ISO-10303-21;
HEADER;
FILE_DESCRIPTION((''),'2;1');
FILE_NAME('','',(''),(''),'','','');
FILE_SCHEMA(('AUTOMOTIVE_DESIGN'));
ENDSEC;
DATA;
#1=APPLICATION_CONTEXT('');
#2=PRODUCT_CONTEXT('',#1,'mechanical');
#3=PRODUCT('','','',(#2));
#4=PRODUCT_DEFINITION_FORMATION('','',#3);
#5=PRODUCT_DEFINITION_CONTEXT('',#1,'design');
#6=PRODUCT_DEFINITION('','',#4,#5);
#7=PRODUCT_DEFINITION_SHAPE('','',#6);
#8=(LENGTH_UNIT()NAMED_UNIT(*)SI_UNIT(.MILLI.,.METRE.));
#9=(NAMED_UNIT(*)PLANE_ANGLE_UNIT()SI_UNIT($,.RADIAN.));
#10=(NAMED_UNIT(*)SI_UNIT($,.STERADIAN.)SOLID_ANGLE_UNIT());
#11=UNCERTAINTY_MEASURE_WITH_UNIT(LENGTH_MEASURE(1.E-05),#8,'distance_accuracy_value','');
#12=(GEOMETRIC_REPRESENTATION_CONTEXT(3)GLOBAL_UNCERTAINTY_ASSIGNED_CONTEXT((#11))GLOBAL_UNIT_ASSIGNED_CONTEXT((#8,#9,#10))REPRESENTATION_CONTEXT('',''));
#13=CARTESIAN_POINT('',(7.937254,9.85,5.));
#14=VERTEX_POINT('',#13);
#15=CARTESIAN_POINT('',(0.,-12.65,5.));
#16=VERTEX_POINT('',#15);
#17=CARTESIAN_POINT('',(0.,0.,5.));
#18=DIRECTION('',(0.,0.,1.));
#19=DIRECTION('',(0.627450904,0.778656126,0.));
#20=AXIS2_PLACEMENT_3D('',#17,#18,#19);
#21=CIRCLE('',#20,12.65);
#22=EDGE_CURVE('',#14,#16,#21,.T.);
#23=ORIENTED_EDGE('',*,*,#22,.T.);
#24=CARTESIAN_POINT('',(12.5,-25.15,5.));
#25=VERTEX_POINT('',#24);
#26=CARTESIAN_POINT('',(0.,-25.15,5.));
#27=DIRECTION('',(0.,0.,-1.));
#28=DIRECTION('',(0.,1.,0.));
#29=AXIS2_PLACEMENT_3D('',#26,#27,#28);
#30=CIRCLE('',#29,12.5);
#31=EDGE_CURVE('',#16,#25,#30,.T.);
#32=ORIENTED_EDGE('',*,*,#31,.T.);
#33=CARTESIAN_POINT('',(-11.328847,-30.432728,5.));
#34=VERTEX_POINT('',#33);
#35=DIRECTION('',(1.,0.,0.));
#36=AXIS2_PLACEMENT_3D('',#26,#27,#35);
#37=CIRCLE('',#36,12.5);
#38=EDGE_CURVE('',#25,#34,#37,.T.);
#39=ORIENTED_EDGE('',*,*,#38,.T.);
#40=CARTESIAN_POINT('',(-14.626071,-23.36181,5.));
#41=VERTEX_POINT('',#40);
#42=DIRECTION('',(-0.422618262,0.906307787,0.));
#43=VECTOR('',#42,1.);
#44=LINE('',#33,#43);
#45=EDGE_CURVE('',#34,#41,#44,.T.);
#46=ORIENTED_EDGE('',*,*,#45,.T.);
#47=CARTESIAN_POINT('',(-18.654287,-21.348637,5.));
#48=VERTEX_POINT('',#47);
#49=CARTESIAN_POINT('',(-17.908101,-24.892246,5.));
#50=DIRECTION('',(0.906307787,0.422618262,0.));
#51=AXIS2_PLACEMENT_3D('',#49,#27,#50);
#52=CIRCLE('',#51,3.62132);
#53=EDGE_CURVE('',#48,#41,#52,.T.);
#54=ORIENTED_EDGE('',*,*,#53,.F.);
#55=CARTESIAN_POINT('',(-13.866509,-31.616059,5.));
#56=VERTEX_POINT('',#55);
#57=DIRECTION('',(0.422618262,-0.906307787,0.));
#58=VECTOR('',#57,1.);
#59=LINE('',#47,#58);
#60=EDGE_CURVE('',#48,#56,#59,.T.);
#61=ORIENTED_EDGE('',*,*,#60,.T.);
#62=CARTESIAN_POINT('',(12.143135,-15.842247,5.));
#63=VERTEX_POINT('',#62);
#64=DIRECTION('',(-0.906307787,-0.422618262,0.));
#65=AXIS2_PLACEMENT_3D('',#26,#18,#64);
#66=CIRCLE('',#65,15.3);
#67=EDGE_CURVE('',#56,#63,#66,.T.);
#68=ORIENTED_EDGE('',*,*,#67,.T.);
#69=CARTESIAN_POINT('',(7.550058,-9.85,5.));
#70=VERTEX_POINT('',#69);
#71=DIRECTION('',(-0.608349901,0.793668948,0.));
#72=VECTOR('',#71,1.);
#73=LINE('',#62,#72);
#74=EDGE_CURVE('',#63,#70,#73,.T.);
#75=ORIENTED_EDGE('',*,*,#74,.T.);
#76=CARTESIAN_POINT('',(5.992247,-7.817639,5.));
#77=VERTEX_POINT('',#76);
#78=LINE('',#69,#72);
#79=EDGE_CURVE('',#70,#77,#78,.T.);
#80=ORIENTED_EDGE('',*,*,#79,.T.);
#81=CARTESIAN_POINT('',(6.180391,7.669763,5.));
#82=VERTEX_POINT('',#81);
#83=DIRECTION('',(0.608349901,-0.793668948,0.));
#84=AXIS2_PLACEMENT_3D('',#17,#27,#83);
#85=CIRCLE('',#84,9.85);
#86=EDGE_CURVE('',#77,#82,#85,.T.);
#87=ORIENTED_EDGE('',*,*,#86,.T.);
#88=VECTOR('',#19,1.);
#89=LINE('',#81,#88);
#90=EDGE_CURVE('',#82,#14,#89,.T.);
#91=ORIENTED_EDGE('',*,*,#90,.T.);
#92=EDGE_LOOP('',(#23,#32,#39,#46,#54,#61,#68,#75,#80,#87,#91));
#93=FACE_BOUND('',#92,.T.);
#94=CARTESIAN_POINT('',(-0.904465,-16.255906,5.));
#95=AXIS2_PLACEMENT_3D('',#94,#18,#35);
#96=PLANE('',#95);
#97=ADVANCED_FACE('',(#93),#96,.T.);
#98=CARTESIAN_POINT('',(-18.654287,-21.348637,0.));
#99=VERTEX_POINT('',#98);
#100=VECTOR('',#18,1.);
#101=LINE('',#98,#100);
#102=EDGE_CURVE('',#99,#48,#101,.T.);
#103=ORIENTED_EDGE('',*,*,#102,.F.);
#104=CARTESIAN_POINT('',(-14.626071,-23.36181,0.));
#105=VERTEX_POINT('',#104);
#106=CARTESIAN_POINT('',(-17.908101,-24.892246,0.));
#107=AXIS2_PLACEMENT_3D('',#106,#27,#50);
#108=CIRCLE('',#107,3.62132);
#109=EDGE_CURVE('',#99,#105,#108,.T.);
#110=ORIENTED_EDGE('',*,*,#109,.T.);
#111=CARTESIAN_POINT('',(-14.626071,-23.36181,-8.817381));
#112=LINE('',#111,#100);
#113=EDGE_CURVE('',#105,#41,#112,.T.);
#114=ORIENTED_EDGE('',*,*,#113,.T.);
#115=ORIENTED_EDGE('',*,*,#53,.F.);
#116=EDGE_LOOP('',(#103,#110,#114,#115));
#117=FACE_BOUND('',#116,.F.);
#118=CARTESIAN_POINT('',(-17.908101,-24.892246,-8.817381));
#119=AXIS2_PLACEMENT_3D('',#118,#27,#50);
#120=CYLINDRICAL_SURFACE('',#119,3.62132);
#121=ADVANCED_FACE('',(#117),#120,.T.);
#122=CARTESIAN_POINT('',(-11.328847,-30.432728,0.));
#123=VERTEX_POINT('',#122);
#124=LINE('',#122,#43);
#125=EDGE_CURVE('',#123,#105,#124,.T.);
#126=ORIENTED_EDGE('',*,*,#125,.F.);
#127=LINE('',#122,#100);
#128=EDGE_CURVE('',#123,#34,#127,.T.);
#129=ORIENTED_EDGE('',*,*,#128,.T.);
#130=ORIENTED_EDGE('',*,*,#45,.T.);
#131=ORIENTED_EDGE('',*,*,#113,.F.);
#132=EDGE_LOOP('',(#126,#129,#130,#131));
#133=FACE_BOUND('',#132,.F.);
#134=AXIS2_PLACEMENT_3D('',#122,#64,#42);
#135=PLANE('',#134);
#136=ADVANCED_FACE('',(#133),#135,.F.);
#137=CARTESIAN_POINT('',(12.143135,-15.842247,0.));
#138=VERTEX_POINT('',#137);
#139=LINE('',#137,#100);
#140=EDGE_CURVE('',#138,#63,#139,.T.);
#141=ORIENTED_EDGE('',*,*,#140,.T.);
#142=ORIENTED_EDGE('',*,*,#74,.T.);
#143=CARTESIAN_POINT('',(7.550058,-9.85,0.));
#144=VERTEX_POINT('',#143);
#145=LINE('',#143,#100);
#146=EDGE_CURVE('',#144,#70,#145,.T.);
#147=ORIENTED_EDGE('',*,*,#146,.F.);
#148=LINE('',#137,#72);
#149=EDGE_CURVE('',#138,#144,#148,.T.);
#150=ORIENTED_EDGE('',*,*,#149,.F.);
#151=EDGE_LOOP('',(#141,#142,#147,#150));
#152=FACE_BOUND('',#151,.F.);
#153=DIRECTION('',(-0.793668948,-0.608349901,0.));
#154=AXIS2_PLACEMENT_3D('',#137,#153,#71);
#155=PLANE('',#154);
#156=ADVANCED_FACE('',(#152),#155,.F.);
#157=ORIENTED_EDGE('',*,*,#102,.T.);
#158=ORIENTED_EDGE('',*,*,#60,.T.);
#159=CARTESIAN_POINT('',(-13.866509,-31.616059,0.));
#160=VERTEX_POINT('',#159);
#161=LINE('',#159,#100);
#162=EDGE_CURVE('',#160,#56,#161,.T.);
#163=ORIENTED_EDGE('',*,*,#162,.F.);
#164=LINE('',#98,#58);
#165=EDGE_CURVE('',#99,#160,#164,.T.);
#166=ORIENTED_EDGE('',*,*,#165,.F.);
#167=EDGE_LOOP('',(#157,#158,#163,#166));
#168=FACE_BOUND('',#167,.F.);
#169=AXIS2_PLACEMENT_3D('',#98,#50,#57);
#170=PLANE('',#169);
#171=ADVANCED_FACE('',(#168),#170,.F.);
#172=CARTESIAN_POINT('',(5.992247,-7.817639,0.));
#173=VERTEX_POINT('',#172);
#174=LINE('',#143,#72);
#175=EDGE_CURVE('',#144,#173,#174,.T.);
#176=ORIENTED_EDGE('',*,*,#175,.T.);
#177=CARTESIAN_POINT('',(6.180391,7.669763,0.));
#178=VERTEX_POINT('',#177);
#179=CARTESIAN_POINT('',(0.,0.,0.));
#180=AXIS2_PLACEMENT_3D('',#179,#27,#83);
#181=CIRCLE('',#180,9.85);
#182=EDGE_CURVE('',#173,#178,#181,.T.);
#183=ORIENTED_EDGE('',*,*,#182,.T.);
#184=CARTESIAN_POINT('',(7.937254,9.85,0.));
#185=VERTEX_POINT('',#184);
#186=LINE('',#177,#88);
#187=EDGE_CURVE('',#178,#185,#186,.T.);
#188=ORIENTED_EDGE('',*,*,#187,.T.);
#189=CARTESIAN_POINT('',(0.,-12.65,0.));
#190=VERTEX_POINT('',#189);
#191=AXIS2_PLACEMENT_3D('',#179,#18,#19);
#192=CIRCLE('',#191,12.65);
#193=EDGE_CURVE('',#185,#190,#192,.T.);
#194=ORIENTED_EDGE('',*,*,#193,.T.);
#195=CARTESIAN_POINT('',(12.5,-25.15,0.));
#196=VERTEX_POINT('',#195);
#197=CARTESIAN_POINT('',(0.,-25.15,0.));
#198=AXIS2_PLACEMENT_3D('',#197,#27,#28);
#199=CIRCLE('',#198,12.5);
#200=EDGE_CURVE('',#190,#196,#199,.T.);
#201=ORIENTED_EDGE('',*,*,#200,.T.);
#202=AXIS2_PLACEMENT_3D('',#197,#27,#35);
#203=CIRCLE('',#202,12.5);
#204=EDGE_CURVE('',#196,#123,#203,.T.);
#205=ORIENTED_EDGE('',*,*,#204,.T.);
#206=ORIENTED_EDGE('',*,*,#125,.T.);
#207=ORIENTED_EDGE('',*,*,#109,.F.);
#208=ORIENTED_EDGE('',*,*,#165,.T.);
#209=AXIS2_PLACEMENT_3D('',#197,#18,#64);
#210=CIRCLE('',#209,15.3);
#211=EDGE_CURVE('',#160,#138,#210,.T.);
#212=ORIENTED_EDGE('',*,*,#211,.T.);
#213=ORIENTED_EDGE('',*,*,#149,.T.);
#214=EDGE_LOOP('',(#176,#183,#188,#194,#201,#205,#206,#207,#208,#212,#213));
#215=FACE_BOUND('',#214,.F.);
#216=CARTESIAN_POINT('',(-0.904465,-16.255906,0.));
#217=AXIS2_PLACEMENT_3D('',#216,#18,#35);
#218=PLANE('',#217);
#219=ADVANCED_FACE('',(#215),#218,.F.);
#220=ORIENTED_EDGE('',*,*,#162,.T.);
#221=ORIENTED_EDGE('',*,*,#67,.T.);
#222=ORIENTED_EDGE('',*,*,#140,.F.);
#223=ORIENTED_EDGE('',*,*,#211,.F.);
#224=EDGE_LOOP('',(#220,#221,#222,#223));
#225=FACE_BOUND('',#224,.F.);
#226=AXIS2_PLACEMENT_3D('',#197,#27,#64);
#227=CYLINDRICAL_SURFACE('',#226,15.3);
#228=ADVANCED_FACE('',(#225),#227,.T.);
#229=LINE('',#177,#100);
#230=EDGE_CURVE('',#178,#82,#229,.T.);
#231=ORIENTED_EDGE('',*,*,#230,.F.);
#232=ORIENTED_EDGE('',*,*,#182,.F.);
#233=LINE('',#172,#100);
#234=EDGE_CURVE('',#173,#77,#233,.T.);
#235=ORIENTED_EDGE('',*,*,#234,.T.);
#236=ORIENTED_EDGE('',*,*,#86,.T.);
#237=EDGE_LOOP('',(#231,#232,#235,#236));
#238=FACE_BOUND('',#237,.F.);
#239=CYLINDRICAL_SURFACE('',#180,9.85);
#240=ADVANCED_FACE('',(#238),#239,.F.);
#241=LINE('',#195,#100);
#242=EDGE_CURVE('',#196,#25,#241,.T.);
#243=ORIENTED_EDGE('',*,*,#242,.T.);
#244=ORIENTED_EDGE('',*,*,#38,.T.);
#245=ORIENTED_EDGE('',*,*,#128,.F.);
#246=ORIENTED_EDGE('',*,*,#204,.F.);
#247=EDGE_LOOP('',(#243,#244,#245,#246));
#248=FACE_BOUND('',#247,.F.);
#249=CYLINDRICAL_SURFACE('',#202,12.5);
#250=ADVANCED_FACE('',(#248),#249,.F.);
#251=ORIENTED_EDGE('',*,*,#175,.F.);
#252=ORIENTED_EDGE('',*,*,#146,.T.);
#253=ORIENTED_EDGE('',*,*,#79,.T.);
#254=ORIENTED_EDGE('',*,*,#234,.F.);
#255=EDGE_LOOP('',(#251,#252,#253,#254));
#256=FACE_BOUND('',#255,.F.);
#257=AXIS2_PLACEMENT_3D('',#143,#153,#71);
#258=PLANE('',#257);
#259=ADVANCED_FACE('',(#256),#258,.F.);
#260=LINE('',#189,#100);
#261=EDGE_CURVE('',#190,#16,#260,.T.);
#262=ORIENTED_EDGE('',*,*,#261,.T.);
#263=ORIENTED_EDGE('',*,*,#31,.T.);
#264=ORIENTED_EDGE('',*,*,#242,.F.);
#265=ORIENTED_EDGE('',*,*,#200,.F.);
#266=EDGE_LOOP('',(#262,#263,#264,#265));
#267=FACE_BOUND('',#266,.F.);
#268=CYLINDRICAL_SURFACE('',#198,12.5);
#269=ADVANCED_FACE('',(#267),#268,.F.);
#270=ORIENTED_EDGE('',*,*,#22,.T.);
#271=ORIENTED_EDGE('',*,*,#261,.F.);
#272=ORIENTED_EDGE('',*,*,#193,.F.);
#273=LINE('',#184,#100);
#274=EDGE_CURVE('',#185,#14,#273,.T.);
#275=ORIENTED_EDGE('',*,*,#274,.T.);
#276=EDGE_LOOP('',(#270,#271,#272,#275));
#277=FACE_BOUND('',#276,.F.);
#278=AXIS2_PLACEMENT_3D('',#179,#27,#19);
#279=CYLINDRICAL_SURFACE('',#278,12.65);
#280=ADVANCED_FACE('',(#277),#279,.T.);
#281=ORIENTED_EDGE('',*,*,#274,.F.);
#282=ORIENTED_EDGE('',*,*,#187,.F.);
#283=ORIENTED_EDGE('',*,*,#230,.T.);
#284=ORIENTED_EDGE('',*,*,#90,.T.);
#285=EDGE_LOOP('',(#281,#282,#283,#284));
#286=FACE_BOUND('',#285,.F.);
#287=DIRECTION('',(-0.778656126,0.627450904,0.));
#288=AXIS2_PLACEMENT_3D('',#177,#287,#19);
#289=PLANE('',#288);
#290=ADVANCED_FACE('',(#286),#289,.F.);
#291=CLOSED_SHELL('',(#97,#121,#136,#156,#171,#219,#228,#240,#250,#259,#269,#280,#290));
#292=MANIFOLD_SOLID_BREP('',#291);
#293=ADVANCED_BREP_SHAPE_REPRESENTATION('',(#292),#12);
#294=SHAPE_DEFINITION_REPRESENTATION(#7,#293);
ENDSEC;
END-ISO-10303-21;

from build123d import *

# Parameters (mm, degrees)
F1_DEPTH    = 5
F2_T1_DEPTH = 22.6347624906


# Not quite as in the source:
# - a fillet or chamfer that OpenCascade refuses, or shapes differently, is made with other operations: its cross-section is extruded or revolved along the edge and cut away or added


with BuildPart() as f1:
    # F0 (on Top) → F1 (new body)
    with BuildSketch(Plane.XY):
        with BuildLine():
            ThreePointArc((5.9922465209, -7.8176391342), (-9.8492732487, 0.1196514659), (6.1803914025, 7.6697628458))
            Line((6.1803914025, 7.6697628458), (7.9372539332, 9.85))
            ThreePointArc((7.9372539332, 9.85), (-11.9294802904, 4.2083250825), (0, -12.65))
            ThreePointArc((0, -12.65), (8.8388347648, -16.3111652352), (12.5, -25.15))
            ThreePointArc((12.5, -25.15), (2.7054951742, -37.353700089), (-11.328847338, -30.4327282718))
            Line((-11.328847338, -30.4327282718), (-16.1166251075, -20.1653057112))
            Line((-16.1166251075, -20.1653057112), (-18.6542869112, -21.3486368441))
            Line((-18.6542869112, -21.3486368441), (-13.8665091417, -31.6160594046))
            ThreePointArc((-13.8665091417, -31.6160594046), (7.9338387883, -38.2322093731), (12.1431348989, -15.8422465209))
            Line((12.1431348989, -15.8422465209), (7.5500579161, -9.85))
            Line((7.5500579161, -9.85), (5.9922465209, -7.8176391342))
        make_face()
    extrude(amount=F1_DEPTH)

    # F2: fillet of radius 3.6213203436 on 1 edges, made by hand

    # F2_s2 → F2_t1 (cut)
    with BuildSketch(Plane.XY.offset(-8.8173812453)):
        with BuildLine():
            ThreePointArc((-14.6260705735, -23.3618102248), (-16.289199108, -21.6529383212), (-18.6542869112, -21.3486368441))
            Line((-18.6542869112, -21.3486368441), (-16.1166251075, -20.1653057112))
            Line((-16.1166251075, -20.1653057112), (-14.6260705735, -23.3618102248))
        make_face()
    extrude(amount=F2_T1_DEPTH, mode=Mode.SUBTRACT)


solid = f1.part
